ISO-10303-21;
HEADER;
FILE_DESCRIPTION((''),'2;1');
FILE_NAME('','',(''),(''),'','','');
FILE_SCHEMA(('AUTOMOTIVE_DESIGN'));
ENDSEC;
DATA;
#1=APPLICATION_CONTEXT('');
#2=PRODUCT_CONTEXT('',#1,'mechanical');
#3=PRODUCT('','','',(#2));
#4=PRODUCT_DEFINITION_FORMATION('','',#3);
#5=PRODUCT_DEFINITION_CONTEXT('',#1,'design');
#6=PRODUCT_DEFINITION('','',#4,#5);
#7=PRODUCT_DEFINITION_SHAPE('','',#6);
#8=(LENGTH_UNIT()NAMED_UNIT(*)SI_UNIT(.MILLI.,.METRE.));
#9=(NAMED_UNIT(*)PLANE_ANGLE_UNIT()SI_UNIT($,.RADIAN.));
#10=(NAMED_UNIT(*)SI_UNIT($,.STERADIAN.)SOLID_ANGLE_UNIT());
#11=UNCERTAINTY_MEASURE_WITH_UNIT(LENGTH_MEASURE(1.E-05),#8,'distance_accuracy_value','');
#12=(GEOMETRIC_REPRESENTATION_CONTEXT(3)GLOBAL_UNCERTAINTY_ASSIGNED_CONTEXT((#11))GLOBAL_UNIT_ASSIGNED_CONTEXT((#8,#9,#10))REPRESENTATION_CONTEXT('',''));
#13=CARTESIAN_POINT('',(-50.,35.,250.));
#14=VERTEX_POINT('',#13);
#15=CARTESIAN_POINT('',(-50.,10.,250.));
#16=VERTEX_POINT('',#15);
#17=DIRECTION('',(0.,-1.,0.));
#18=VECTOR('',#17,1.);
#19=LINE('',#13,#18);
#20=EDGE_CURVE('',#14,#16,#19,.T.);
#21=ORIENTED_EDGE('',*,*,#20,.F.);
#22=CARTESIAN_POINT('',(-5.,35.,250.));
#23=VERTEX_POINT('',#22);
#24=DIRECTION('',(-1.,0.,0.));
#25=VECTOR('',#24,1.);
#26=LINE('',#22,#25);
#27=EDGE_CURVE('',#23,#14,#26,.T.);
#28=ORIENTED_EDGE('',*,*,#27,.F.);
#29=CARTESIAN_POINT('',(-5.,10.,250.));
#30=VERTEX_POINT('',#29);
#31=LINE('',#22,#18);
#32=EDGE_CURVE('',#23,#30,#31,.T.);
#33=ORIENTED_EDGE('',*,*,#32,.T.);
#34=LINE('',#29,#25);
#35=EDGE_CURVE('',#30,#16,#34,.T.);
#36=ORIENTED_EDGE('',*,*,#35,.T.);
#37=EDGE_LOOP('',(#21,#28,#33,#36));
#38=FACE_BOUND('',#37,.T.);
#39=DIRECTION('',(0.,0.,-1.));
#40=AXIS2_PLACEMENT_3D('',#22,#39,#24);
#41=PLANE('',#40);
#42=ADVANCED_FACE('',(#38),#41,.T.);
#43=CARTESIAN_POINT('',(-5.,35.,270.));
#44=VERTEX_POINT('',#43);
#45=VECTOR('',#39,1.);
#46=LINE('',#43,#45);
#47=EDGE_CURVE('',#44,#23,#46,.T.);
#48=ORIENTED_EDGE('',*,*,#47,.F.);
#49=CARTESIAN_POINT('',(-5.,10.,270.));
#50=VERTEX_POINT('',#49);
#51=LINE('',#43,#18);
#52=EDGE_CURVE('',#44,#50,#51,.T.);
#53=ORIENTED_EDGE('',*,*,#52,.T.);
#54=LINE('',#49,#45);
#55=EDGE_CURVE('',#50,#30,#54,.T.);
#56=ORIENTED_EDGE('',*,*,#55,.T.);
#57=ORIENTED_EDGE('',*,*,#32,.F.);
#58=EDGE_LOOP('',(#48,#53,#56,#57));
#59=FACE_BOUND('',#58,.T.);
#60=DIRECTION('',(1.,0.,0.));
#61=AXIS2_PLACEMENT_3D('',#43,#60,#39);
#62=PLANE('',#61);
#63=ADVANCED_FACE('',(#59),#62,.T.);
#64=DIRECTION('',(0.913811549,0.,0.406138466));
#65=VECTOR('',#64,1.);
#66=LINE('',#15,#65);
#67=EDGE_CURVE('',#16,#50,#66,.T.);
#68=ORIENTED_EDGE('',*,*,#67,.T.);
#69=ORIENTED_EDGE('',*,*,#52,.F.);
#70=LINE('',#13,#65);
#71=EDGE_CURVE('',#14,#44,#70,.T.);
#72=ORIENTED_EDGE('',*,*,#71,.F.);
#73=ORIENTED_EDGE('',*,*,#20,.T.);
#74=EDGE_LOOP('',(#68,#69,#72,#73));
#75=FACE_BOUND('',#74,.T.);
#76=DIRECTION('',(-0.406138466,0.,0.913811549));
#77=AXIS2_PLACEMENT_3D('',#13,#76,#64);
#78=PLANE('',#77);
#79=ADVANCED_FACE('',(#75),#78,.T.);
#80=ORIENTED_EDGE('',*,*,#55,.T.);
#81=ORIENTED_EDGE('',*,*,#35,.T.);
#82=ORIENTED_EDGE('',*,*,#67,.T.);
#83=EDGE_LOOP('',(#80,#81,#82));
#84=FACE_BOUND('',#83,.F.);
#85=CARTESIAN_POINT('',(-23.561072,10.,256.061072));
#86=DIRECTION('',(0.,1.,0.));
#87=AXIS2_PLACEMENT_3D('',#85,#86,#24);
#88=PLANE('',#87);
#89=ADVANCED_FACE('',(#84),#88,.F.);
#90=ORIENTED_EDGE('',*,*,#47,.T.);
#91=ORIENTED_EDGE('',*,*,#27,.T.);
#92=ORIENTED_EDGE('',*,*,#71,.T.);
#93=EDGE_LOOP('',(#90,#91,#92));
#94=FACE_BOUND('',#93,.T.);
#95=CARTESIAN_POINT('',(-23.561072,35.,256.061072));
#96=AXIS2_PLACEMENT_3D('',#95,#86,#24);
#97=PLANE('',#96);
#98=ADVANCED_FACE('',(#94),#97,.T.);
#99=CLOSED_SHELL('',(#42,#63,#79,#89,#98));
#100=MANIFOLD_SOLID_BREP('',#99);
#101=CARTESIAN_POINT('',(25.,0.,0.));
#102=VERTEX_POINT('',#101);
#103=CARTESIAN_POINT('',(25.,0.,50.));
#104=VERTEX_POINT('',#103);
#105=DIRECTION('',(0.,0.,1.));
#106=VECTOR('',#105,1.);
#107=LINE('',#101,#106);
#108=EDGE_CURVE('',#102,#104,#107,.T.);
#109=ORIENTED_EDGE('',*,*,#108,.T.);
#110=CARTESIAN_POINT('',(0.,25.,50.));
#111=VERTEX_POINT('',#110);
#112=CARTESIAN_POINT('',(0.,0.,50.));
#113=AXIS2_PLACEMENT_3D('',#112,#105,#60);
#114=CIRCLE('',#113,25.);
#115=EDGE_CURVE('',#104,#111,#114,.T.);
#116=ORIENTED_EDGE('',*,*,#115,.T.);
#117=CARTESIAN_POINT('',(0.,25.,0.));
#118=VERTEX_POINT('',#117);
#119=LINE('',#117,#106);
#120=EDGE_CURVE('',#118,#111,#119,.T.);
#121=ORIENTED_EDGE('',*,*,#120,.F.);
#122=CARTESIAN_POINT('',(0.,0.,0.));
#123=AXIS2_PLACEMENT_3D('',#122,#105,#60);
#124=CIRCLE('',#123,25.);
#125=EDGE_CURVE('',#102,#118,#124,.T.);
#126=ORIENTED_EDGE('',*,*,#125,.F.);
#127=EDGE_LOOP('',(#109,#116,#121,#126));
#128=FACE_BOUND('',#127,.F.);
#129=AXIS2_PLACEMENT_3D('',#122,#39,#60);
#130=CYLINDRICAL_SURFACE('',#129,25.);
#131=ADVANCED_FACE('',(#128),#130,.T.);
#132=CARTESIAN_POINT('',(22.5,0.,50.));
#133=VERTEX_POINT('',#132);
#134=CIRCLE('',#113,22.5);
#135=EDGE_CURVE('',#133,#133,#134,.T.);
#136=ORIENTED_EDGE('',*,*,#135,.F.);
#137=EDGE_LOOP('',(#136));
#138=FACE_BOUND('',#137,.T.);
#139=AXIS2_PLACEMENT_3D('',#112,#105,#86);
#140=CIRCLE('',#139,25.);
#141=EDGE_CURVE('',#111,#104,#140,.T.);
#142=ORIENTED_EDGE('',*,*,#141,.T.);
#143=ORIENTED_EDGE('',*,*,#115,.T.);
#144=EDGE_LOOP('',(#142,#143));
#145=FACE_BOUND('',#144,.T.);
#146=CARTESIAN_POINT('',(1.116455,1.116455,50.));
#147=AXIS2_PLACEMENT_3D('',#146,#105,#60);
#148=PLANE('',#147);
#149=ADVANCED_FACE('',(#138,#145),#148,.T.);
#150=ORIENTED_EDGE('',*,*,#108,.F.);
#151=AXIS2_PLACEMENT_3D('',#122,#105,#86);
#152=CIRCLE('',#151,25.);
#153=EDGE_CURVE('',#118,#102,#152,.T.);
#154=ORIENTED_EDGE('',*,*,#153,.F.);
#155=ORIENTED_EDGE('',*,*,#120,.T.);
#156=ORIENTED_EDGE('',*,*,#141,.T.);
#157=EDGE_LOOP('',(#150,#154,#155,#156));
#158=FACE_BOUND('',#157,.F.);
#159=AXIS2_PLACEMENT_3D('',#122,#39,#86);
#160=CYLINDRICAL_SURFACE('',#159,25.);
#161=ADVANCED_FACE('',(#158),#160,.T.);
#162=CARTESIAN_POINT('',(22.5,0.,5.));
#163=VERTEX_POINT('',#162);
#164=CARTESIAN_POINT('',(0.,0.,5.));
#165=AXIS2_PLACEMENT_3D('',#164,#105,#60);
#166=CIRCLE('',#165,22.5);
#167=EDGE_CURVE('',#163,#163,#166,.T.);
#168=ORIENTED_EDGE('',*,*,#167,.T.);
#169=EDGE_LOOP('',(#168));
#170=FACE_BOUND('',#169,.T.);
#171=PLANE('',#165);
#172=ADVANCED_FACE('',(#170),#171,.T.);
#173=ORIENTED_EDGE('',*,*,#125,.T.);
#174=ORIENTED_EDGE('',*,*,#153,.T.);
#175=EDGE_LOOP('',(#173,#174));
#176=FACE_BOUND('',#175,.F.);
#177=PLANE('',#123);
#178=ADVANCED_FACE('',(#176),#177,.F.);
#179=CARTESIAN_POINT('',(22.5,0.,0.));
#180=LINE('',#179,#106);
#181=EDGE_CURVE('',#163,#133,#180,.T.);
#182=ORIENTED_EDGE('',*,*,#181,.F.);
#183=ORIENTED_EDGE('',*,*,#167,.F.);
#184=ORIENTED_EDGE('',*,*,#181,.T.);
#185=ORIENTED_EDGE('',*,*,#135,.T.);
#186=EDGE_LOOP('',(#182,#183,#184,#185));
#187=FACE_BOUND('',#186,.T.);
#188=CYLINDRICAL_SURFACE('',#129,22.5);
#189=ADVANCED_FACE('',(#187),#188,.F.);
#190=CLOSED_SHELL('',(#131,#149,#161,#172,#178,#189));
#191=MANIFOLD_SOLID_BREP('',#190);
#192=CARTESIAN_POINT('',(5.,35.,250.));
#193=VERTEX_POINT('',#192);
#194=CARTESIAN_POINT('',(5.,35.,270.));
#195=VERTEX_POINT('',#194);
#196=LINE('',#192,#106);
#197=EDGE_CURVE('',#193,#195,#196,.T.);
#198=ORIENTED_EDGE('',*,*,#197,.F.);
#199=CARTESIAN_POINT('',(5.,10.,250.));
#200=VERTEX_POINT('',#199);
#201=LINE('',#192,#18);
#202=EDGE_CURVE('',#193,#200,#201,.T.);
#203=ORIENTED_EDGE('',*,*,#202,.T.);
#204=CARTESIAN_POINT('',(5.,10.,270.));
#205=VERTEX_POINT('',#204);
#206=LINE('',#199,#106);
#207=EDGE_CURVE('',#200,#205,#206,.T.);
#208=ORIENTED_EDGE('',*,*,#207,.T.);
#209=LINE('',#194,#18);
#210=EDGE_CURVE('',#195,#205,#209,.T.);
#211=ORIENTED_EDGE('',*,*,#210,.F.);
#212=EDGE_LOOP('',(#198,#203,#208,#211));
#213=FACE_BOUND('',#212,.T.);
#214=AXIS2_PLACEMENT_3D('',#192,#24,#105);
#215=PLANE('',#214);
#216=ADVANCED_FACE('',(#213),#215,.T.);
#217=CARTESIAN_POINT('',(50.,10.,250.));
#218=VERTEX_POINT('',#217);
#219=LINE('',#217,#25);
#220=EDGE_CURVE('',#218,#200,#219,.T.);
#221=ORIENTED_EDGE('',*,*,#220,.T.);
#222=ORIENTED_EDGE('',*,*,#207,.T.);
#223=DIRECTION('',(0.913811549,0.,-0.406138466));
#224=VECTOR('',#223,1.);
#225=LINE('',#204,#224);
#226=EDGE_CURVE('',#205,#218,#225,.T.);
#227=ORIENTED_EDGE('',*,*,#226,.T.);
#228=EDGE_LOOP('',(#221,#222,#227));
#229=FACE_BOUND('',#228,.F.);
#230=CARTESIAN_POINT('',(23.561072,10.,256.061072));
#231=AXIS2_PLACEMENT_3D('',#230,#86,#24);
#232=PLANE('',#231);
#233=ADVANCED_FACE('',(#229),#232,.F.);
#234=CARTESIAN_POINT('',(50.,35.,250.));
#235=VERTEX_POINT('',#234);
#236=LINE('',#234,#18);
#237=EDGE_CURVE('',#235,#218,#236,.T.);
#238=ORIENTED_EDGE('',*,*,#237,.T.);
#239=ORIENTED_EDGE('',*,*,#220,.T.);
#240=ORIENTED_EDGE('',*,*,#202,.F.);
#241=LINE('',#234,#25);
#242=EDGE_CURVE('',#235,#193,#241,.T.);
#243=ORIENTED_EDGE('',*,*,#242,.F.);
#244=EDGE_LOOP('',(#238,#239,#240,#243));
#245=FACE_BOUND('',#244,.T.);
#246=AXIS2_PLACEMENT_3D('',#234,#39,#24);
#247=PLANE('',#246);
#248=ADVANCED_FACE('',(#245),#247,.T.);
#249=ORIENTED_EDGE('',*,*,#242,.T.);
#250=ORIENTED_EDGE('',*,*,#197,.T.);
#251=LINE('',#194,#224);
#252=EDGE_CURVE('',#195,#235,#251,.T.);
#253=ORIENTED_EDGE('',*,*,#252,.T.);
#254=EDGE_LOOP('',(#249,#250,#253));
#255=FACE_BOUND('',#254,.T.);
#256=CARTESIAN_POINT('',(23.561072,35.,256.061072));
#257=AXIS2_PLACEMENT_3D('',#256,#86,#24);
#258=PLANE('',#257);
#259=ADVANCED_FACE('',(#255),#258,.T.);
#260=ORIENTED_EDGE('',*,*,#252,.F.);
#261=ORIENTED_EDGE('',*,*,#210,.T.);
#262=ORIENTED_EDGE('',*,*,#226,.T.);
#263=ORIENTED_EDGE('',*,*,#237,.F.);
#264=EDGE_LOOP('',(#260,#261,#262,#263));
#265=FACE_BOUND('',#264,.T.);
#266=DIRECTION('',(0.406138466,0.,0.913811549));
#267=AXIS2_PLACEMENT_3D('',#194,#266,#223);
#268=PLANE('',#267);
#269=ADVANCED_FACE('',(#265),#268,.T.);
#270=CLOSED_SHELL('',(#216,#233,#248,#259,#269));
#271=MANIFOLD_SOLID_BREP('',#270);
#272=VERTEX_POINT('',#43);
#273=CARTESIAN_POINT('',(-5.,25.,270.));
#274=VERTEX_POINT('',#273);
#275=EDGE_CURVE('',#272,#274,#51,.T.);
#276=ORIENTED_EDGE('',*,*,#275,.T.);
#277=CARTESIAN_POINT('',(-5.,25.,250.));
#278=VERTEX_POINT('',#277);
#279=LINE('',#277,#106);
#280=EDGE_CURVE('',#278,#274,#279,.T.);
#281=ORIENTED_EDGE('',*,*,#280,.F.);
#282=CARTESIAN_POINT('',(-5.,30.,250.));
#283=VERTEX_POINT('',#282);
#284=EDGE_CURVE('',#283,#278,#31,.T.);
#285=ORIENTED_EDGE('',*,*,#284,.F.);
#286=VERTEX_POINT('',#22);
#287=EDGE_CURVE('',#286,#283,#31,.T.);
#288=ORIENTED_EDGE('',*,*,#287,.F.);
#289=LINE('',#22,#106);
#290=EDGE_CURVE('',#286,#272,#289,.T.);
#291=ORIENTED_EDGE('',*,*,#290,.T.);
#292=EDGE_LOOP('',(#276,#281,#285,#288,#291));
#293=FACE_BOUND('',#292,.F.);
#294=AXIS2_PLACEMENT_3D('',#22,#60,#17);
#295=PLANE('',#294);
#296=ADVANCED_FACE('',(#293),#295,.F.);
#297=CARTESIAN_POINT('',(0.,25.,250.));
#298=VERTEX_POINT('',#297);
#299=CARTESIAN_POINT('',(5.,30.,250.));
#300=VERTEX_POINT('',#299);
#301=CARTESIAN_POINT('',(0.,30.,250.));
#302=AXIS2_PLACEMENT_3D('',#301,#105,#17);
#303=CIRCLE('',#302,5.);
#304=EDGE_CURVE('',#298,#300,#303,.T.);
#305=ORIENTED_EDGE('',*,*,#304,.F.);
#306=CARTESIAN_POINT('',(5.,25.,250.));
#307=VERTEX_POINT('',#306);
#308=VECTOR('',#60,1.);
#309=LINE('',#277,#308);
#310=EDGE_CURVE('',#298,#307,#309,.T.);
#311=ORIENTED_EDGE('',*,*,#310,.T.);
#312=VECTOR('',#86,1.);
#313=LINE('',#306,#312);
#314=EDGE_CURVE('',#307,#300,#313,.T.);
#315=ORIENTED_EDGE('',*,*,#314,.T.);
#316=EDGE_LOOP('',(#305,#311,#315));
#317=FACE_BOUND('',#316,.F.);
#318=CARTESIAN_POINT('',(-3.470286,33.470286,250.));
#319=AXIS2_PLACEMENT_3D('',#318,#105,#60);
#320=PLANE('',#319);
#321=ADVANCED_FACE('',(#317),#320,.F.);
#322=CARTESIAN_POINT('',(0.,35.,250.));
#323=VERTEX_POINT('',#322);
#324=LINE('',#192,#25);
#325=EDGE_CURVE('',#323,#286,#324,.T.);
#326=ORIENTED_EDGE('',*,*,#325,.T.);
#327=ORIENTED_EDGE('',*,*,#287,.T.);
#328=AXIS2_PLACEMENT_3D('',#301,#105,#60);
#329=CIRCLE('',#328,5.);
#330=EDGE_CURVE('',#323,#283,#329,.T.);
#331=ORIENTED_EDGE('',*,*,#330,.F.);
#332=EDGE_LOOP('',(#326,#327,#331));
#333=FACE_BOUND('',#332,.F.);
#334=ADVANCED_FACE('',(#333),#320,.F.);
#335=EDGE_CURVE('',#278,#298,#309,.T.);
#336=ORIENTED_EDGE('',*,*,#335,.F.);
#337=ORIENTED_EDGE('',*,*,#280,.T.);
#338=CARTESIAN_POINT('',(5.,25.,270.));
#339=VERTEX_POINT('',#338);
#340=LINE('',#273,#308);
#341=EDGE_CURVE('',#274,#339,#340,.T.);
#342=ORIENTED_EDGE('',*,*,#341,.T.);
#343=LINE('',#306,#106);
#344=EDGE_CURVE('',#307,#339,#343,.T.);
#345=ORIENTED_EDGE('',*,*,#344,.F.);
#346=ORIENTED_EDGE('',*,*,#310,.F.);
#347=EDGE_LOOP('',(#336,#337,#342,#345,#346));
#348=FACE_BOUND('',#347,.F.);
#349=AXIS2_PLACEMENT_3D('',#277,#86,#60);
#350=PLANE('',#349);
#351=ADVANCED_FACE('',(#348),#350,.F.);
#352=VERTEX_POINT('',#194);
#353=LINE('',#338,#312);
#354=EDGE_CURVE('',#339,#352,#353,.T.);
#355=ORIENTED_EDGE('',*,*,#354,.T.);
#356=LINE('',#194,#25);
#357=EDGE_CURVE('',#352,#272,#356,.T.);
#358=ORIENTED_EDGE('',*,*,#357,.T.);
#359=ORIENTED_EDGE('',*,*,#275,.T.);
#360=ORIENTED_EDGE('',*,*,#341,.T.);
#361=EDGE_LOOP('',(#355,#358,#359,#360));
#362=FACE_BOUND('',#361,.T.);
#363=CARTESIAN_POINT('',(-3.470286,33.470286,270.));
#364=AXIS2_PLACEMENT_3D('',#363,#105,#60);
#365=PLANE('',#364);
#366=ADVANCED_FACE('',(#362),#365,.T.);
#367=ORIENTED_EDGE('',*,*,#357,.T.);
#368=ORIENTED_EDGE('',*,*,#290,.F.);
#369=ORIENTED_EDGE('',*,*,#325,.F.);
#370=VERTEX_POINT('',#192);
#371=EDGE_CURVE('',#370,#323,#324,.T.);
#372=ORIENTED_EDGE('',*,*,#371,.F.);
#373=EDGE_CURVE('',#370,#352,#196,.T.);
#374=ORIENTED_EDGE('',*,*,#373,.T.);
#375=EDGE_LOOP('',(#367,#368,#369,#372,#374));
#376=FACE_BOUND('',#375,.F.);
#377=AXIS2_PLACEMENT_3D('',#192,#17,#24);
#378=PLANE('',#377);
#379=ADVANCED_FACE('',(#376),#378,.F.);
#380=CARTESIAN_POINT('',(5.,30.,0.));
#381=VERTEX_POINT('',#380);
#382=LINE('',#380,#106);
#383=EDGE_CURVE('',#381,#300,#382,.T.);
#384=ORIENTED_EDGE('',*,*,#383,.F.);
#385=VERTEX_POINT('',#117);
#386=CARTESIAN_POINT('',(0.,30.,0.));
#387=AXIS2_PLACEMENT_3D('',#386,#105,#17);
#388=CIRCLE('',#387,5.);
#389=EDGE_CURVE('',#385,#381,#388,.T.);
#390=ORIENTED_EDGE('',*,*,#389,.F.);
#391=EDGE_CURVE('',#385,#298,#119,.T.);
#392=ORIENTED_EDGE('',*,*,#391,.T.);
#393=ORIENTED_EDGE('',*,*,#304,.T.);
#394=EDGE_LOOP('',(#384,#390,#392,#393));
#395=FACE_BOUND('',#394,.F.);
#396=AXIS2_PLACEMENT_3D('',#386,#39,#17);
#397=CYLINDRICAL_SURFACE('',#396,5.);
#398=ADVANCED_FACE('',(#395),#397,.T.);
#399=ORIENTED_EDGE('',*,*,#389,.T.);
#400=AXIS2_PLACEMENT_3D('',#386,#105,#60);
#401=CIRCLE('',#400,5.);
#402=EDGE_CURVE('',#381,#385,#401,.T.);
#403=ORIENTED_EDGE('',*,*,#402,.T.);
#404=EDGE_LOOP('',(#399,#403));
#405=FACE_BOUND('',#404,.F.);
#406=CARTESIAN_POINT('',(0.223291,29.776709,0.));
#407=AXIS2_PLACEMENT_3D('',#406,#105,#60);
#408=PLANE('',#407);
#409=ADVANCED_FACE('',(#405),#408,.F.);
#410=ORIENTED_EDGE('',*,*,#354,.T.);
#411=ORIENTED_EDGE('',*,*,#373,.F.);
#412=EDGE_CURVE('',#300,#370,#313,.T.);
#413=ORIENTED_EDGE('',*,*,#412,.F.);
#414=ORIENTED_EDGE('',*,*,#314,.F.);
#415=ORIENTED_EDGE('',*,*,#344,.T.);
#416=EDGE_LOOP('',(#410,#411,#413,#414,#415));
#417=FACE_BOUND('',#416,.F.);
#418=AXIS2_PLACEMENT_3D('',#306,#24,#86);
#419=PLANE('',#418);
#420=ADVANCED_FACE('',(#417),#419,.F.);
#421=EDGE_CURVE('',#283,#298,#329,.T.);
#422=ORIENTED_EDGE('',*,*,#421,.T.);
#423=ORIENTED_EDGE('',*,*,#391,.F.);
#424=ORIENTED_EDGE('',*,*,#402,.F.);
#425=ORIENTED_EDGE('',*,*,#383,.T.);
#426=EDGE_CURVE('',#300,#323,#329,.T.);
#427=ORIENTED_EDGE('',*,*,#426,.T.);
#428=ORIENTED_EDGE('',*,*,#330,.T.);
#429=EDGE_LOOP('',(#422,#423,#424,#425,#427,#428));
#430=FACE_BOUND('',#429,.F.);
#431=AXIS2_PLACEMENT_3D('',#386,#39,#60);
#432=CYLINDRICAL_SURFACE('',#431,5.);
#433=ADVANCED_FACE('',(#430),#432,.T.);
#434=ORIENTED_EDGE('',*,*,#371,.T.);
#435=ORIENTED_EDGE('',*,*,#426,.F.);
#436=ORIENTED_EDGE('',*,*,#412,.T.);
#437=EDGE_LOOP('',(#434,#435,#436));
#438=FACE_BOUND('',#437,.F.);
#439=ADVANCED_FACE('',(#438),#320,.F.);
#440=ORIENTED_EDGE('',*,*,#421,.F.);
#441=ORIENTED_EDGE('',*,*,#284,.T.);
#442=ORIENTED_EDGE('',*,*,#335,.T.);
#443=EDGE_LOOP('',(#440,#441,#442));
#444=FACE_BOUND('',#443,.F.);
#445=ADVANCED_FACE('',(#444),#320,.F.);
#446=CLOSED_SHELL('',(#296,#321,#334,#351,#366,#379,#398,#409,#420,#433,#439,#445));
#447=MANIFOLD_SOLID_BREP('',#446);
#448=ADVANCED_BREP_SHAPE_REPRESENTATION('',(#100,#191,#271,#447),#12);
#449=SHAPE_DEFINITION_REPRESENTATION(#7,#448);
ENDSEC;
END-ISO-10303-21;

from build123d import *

# Parameters (mm, degrees)
F0_R     = 22.5
F1_DEPTH = 50
F2_DEPTH = 250
F3_DEPTH = 5
F5_DEPTH = 20
F7_DEPTH = 25


with BuildPart() as f1:
    # F0 (on Top) → F1 (new body)
    with BuildSketch(Plane.XY):
        with BuildLine():
            ThreePointArc((0, 25), (-17.6776695297, -17.6776695297), (25, 0))
            ThreePointArc((25, 0), (17.6776695297, 17.6776695297), (0, 25))
        make_face()
        Circle(F0_R, mode=Mode.SUBTRACT)
    extrude(amount=F1_DEPTH)

    # F0 (on Top) → F3 (join)
    with BuildSketch(Plane.XY):
        Circle(F0_R)
    extrude(amount=F3_DEPTH)


with BuildPart() as f2:
    # F0 (on Top) → F2 (new body)
    with BuildSketch(Plane.XY):
        with BuildLine():
            ThreePointArc((5, 30), (-3.5355339059, 33.5355339059), (0, 25))
            ThreePointArc((0, 25), (3.5355339059, 26.4644660941), (5, 30))
        make_face()
    extrude(amount=F2_DEPTH)

    # F4 (on face) → F5 (join)
    with BuildSketch(Plane.XY.offset(250)):
        with BuildLine():
            Line((0, 35), (-5, 35))
            Line((-5, 35), (-5, 30))
            ThreePointArc((-5, 30), (-3.5355339059, 33.5355339059), (0, 35))
        make_face()
        with BuildLine():
            ThreePointArc((5, 30), (3.5355339059, 33.5355339059), (0, 35))
            ThreePointArc((0, 35), (-3.5355339059, 33.5355339059), (-5, 30))
            ThreePointArc((-5, 30), (-3.5355339059, 26.4644660941), (0, 25))
            ThreePointArc((0, 25), (3.5355339059, 26.4644660941), (5, 30))
        make_face()
        with BuildLine():
            Line((5, 35), (0, 35))
            ThreePointArc((0, 35), (3.5355339059, 33.5355339059), (5, 30))
            Line((5, 30), (5, 35))
        make_face()
        with BuildLine():
            Line((5, 25), (5, 30))
            ThreePointArc((5, 30), (3.5355339059, 26.4644660941), (0, 25))
            Line((0, 25), (5, 25))
        make_face()
        with BuildLine():
            ThreePointArc((0, 25), (-3.5355339059, 26.4644660941), (-5, 30))
            Line((-5, 30), (-5, 25))
            Line((-5, 25), (0, 25))
        make_face()
    extrude(amount=F5_DEPTH)


with BuildPart() as f7:
    # F6 (on face) → F7 (new body)
    with BuildSketch(Plane(origin=(0, 35, 0), x_dir=(-1, 0, 0), z_dir=(0, 1, 0))):
        Polygon((-50, 250), (-5, 250), (-5, 270), align=None)
    extrude(amount=-F7_DEPTH)


with BuildPart() as f7b:
    # F6 (on face) → F7, piece 2 (new body)
    with BuildSketch(Plane(origin=(0, 35, 0), x_dir=(-1, 0, 0), z_dir=(0, 1, 0))):
        Polygon((5, 270), (5, 250), (50, 250), align=None)
    extrude(amount=-F7_DEPTH)


solid = Compound([f1.part, f2.part, f7.part, f7b.part])
